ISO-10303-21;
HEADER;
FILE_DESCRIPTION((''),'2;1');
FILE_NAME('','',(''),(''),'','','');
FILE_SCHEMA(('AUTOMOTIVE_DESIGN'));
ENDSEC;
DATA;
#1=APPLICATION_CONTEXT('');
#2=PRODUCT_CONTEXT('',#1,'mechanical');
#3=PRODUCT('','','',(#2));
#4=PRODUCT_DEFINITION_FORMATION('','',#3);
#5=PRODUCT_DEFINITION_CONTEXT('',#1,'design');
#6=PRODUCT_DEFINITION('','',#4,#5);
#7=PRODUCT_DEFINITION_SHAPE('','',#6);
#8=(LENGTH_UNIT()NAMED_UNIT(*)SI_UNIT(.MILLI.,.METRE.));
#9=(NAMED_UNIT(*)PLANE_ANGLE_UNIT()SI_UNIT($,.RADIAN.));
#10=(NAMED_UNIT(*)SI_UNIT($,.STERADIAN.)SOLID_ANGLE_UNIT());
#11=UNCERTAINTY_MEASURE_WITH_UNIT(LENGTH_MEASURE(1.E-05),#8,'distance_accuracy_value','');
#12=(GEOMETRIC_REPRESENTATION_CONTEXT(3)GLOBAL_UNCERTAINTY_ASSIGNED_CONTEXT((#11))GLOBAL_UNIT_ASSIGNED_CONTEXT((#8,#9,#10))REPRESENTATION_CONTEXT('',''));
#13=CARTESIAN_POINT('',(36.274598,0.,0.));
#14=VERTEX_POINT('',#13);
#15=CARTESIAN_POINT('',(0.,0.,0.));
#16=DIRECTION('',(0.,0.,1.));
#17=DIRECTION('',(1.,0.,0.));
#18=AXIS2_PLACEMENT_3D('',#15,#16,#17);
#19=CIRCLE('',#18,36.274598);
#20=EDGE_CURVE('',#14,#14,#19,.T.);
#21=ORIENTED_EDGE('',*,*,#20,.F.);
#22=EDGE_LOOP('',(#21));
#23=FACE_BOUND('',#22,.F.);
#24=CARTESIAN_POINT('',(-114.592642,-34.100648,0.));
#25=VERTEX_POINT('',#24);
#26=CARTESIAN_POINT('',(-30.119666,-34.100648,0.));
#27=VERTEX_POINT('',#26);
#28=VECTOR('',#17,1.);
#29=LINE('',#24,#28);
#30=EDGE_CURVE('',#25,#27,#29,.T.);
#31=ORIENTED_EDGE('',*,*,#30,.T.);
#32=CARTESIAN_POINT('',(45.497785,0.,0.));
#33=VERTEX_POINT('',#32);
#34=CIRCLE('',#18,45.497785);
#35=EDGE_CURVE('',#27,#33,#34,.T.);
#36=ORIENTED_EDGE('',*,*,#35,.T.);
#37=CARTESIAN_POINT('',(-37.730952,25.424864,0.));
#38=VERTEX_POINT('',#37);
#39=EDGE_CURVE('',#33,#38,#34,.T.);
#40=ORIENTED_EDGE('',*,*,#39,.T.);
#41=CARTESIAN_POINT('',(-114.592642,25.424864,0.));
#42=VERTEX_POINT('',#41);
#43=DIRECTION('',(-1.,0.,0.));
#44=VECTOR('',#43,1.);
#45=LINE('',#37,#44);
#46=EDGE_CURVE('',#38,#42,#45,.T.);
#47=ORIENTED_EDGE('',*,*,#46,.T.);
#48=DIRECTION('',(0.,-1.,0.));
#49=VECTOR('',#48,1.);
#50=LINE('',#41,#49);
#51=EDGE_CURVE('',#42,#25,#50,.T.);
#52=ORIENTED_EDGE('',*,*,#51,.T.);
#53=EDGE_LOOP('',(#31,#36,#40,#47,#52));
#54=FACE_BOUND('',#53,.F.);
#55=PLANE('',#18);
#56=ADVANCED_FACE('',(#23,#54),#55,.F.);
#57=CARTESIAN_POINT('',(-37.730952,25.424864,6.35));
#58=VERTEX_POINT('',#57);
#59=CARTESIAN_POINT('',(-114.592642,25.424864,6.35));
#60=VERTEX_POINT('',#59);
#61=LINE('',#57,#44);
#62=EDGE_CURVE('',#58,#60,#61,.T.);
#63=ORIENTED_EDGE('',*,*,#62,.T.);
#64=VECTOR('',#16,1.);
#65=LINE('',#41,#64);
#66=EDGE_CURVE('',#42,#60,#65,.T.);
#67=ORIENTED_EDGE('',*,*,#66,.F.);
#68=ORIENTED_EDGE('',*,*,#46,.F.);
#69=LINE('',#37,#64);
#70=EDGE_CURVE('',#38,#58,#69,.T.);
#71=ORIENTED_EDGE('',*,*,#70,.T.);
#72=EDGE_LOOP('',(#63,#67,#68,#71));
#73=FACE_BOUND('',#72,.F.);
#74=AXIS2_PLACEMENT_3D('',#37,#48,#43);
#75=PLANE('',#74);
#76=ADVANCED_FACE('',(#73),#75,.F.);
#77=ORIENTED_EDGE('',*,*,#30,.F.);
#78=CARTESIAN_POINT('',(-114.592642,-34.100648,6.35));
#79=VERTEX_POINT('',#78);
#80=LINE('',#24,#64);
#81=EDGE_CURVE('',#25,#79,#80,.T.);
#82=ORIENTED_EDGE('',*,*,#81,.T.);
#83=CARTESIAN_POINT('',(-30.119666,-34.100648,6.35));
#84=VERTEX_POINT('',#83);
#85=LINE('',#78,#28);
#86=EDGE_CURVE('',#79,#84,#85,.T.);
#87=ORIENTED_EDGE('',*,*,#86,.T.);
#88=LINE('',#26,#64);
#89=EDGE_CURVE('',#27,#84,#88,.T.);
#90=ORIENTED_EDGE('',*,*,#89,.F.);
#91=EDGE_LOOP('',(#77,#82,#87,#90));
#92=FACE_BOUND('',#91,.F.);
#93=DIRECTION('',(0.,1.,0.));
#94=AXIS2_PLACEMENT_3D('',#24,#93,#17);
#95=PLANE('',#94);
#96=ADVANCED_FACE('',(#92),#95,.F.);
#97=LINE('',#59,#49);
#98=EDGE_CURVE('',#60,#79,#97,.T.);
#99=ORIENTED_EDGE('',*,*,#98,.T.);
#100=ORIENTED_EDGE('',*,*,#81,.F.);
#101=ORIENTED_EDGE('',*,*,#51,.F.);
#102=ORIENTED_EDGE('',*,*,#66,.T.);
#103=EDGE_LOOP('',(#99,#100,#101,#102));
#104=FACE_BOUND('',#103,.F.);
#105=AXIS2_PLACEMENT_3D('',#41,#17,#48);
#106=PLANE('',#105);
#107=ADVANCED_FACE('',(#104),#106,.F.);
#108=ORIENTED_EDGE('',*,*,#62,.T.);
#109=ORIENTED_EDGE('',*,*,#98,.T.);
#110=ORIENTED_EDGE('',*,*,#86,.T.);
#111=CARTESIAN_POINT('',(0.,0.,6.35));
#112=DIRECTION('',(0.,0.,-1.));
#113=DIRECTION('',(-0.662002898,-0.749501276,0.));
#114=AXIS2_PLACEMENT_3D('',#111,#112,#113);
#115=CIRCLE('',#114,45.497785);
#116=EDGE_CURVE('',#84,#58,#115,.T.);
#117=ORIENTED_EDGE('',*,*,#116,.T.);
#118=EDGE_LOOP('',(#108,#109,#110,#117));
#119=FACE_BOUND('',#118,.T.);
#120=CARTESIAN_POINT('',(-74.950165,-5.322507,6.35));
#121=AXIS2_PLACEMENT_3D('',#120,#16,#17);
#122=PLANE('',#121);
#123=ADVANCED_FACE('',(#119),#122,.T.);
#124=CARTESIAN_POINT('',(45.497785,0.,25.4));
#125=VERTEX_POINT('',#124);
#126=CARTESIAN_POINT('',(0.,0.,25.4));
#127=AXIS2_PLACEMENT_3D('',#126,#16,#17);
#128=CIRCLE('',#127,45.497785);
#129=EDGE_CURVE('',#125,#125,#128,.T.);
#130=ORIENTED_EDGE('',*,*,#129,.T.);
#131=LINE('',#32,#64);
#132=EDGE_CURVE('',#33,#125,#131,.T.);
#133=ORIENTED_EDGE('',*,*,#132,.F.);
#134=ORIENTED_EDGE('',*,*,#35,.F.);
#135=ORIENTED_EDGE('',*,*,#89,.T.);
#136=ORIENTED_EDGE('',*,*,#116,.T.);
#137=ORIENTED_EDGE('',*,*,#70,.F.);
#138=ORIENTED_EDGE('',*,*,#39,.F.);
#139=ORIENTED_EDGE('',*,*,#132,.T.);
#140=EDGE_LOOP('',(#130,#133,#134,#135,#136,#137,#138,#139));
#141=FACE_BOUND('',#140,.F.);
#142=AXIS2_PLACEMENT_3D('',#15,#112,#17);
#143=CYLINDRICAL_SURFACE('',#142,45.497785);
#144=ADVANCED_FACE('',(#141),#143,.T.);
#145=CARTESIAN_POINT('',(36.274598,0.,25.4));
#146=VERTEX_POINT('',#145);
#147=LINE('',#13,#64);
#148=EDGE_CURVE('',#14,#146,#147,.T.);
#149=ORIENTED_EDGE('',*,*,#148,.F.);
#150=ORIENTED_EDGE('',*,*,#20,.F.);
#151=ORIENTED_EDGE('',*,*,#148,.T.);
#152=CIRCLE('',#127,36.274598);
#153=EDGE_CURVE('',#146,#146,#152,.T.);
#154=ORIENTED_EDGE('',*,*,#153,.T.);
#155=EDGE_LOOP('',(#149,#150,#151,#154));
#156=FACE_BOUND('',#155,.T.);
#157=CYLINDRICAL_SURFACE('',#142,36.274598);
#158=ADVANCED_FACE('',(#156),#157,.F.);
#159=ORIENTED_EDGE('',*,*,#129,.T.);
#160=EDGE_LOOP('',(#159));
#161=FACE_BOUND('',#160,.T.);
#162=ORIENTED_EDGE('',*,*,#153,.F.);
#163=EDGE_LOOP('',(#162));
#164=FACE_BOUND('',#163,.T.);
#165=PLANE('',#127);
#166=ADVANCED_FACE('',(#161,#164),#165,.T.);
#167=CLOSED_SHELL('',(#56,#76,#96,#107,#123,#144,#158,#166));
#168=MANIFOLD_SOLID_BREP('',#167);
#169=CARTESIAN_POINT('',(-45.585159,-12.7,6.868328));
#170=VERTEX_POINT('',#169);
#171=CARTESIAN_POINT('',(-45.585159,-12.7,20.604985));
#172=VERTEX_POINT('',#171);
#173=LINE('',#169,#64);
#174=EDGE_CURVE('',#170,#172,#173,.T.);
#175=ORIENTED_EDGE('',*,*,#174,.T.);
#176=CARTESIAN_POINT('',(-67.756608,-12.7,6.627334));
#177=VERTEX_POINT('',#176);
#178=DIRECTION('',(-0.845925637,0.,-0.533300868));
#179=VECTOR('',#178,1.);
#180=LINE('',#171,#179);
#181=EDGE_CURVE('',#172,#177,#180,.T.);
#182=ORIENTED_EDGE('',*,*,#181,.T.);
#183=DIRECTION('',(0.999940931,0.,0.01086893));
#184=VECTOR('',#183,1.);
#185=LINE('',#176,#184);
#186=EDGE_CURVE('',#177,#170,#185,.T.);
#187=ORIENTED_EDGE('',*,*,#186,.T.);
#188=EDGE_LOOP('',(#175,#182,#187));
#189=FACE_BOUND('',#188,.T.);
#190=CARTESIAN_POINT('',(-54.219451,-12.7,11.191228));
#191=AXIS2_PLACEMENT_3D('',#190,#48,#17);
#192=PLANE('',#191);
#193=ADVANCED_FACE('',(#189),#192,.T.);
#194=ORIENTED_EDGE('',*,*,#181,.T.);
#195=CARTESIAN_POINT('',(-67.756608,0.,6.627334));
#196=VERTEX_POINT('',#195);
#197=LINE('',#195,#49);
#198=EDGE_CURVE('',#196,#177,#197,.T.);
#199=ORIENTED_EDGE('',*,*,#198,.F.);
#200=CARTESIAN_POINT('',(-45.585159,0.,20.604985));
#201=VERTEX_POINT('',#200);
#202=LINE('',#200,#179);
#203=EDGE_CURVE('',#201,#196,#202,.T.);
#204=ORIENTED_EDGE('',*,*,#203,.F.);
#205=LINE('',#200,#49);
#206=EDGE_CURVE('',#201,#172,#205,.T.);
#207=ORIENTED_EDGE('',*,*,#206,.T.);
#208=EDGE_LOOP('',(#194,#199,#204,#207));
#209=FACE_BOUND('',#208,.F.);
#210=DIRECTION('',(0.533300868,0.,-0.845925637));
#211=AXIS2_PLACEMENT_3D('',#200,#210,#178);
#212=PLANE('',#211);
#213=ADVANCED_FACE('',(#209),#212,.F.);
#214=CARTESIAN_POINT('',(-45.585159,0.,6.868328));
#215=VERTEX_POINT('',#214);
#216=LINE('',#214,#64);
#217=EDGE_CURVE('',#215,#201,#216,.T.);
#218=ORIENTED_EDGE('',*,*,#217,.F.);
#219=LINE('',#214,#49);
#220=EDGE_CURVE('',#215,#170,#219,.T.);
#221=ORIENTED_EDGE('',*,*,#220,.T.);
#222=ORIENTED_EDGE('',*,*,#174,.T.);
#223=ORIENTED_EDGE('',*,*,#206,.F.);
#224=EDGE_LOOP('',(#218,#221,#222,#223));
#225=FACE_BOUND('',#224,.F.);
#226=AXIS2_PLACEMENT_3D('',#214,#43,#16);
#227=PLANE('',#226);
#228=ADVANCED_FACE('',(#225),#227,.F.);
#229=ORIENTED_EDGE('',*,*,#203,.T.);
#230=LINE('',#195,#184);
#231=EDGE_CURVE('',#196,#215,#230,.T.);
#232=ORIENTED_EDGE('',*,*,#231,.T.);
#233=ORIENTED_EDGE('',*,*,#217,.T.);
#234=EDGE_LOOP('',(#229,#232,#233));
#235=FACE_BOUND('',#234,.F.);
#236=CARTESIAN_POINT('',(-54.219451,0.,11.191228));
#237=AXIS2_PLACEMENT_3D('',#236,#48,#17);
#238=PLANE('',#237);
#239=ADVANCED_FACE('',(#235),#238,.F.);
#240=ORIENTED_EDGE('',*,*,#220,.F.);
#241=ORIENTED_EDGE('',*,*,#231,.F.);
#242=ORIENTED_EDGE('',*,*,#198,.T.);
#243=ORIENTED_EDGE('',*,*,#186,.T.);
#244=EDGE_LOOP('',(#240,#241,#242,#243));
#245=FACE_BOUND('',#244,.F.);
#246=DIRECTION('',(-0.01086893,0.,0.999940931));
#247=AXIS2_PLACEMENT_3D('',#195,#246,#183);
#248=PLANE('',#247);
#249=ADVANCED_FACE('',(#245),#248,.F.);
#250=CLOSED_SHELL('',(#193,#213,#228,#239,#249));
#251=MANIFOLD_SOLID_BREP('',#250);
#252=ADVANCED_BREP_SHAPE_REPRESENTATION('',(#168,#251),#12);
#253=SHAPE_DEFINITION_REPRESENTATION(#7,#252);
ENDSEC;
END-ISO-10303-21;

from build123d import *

# Parameters (mm, degrees)
F0_R     = 36.2745976669
F1_DEPTH = 25.4
F2_DEPTH = 6.35
F4_DEPTH = 12.7


# Not quite as in the source:
# - a length typed as a fraction of an inch, garbled in the dataset ("3 / 203.2 mm" for 3/8 in), is restored


with BuildPart() as f1:
    # F0 (on Top) → F1 (new body)
    with BuildSketch(Plane.XY):
        with BuildLine():
            ThreePointArc((-30.119665644, -34.1006480157), (18.7038816469, -41.4754537641), (45.4977851505, 0))
            ThreePointArc((45.4977851505, 0), (13.2923607222, 43.5127751359), (-37.7309519745, 25.4248641431))
            ThreePointArc((-37.7309519745, 25.4248641431), (-45.1303470765, -5.770634831), (-30.119665644, -34.1006480157))
        make_face()
        Circle(F0_R, mode=Mode.SUBTRACT)
    extrude(amount=F1_DEPTH)

    # F0 (on Top) → F2 (join)
    with BuildSketch(Plane.XY):
        with BuildLine():
            ThreePointArc((-30.119665644, -34.1006480157), (-45.1303470765, -5.770634831), (-37.7309519745, 25.4248641431))
            Line((-37.7309519745, 25.4248641431), (-114.592641592, 25.4248641431))
            Line((-114.592641592, 25.4248641431), (-114.592641592, -34.1006480157))
            Line((-114.592641592, -34.1006480157), (-30.119665644, -34.1006480157))
        make_face()
    extrude(amount=F2_DEPTH)


with BuildPart() as f4:
    # F3 (on Front) → F4 (new body)
    with BuildSketch(Plane.XZ):
        Polygon((-45.5851592124, 20.6049848348), (-67.7566081285, 6.6273342818), (-45.5851592124, 6.8683284335), align=None)
    extrude(amount=F4_DEPTH)


solid = Compound([f1.part, f4.part])
